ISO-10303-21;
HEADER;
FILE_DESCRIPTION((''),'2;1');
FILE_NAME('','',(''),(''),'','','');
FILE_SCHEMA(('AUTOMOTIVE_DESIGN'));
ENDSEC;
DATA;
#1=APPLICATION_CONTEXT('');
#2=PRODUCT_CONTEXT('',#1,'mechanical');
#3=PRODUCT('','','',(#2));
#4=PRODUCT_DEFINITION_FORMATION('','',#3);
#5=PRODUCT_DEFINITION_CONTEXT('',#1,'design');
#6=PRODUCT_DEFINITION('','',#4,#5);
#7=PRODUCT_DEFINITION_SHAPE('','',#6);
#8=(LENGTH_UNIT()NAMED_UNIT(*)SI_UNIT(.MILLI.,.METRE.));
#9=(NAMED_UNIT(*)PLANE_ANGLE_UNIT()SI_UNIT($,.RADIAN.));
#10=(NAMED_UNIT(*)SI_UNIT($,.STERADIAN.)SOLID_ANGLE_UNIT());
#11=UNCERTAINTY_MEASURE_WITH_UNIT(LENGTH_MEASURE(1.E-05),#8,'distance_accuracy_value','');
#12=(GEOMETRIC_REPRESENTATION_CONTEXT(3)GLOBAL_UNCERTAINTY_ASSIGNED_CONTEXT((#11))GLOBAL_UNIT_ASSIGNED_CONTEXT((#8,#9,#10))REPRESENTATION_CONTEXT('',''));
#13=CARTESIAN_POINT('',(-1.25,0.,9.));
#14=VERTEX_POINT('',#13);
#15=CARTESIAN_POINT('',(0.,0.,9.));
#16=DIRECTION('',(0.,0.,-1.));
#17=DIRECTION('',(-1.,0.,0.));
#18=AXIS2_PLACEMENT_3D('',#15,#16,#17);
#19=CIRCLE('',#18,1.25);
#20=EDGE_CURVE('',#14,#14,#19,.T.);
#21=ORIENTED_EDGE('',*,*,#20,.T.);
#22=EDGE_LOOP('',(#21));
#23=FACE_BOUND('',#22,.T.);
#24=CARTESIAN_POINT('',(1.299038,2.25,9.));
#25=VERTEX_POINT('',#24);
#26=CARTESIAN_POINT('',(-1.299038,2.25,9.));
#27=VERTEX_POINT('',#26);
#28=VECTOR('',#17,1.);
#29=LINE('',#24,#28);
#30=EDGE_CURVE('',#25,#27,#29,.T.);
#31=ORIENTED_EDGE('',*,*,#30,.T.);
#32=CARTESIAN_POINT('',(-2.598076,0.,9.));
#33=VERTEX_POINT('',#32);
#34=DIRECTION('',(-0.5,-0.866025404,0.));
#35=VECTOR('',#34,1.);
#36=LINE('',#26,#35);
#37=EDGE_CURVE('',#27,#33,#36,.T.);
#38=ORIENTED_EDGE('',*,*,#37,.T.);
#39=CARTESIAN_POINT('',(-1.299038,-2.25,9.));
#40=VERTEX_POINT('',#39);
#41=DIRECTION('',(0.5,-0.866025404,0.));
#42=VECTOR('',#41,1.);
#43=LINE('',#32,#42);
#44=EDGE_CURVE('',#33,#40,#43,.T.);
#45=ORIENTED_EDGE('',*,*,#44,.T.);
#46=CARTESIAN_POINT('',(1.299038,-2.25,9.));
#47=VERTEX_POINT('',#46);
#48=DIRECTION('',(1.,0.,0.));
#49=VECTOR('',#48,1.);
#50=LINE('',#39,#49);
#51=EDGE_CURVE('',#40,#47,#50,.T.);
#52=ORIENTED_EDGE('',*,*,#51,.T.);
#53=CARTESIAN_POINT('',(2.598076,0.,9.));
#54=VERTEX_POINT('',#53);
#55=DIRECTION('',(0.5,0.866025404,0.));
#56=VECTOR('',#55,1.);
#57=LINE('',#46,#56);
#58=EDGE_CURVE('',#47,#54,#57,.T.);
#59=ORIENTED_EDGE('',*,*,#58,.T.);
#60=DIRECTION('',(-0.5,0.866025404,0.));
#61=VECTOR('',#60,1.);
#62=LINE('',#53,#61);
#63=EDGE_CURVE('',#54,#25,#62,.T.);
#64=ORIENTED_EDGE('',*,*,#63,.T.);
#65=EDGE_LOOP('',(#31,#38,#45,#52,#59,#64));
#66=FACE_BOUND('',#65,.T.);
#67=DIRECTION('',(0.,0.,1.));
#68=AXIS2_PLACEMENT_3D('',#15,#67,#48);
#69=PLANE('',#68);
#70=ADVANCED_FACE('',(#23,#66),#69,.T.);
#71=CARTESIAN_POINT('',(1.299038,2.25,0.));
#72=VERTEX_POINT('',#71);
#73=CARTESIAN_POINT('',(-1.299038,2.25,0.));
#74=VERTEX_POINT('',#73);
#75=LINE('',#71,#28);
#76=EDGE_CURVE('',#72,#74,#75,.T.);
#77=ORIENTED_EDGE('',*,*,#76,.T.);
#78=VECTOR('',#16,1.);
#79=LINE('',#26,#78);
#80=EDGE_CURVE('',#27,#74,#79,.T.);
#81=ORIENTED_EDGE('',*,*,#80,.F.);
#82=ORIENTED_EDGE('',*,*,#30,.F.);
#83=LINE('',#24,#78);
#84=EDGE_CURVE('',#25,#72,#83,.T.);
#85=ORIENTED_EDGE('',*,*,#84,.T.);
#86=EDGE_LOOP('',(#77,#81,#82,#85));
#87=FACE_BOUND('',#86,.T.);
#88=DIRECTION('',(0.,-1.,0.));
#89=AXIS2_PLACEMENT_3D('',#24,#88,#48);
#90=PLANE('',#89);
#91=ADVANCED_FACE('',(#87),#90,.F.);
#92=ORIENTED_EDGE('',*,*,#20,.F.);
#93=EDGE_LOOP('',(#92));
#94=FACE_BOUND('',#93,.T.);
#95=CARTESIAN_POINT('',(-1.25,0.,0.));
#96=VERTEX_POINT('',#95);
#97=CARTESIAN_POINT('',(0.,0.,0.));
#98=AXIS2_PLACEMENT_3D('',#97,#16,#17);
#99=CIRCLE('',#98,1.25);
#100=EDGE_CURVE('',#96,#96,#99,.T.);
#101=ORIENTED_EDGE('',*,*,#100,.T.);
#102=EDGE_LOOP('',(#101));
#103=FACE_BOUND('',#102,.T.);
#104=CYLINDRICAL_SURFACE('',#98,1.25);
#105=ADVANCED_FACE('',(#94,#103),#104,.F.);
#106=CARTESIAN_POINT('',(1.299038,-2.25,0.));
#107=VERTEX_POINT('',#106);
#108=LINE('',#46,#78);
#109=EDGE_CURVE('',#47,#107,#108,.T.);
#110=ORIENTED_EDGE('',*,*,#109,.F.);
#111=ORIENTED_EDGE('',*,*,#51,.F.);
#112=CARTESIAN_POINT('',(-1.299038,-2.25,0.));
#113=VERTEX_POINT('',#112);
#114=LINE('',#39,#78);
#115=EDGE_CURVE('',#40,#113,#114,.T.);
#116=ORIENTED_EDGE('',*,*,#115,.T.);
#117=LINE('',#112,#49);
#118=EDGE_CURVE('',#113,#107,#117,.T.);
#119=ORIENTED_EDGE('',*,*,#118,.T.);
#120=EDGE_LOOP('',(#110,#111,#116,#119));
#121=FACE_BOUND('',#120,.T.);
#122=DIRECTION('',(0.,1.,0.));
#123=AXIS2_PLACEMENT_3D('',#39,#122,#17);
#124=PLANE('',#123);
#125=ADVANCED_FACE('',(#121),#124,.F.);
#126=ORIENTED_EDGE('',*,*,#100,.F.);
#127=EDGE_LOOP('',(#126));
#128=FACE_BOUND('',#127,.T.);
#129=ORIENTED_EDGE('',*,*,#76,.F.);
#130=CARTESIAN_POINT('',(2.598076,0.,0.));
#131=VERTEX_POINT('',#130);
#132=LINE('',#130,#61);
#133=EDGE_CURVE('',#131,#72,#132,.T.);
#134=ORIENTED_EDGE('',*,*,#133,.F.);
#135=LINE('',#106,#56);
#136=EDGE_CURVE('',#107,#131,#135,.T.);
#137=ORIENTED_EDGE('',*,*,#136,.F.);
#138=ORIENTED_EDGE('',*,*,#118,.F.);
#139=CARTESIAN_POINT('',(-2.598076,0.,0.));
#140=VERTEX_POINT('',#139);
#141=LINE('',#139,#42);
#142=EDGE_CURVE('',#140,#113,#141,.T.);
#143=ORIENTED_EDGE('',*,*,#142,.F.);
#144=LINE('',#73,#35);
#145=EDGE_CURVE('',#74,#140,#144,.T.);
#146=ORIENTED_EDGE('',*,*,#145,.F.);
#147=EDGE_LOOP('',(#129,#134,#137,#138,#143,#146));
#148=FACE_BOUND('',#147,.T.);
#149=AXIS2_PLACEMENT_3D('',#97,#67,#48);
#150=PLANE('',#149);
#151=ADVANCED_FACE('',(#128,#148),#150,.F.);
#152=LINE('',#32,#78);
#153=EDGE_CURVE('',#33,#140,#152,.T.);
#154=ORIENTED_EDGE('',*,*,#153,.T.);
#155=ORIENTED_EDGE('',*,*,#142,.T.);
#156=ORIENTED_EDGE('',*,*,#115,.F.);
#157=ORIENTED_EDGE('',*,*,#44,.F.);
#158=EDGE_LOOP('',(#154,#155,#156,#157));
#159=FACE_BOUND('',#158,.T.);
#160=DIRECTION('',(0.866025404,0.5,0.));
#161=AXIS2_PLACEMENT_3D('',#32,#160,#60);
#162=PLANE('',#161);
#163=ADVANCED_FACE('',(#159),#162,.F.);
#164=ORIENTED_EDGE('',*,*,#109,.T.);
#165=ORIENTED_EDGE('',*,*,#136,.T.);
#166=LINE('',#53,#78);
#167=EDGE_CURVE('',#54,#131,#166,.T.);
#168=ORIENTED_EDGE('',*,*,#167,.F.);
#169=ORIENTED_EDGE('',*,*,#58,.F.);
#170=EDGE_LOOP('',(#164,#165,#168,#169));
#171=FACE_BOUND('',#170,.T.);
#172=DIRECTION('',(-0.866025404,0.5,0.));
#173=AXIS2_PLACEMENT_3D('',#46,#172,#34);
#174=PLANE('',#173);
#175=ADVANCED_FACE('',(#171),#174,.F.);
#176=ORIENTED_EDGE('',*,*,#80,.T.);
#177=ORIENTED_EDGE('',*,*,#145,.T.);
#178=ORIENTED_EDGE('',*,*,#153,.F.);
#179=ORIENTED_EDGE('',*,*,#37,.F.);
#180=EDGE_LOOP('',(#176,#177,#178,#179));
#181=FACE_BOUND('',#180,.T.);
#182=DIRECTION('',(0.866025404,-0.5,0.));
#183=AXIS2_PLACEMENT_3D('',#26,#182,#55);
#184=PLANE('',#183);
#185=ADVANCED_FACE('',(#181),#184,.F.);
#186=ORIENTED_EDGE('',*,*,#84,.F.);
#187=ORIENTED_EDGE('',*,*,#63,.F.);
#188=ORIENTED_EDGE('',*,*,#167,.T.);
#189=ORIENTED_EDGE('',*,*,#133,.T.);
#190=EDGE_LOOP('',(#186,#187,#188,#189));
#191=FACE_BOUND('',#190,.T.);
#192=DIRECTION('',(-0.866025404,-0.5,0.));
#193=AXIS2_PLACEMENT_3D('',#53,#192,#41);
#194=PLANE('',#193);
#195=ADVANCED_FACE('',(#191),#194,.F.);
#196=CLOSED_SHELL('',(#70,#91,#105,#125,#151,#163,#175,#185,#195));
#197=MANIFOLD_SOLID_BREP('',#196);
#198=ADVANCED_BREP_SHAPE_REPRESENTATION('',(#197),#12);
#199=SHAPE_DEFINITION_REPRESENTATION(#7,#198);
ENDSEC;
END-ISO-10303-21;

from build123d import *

# Parameters (mm, degrees)
EXTRUDE_1_DEPTH            = 9
HOLE_WIZARD_M3_1_OUTLINE_R = 1.25
HOLE_WIZARD_M3_1_DEPTH     = 9


# Read off the part's stored shape, not the designer's step: M3 螺纹孔1
with BuildPart() as part:
    # 草图1 → 凸台-拉伸1 (new body)
    with BuildSketch(Plane.XY):
        Polygon((2.598076211, 0), (1.299038106, 2.25), (-1.299038106, 2.25), (-2.598076211, 0), (-1.299038106, -2.25), (1.299038106, -2.25), align=None)
    extrude(amount=EXTRUDE_1_DEPTH)

    # M3 螺纹孔1 outline → M3 螺纹孔1 (cut)
    with BuildSketch(Plane.XY):
        Circle(HOLE_WIZARD_M3_1_OUTLINE_R)
    extrude(amount=HOLE_WIZARD_M3_1_DEPTH, mode=Mode.SUBTRACT)


solid = part.part
